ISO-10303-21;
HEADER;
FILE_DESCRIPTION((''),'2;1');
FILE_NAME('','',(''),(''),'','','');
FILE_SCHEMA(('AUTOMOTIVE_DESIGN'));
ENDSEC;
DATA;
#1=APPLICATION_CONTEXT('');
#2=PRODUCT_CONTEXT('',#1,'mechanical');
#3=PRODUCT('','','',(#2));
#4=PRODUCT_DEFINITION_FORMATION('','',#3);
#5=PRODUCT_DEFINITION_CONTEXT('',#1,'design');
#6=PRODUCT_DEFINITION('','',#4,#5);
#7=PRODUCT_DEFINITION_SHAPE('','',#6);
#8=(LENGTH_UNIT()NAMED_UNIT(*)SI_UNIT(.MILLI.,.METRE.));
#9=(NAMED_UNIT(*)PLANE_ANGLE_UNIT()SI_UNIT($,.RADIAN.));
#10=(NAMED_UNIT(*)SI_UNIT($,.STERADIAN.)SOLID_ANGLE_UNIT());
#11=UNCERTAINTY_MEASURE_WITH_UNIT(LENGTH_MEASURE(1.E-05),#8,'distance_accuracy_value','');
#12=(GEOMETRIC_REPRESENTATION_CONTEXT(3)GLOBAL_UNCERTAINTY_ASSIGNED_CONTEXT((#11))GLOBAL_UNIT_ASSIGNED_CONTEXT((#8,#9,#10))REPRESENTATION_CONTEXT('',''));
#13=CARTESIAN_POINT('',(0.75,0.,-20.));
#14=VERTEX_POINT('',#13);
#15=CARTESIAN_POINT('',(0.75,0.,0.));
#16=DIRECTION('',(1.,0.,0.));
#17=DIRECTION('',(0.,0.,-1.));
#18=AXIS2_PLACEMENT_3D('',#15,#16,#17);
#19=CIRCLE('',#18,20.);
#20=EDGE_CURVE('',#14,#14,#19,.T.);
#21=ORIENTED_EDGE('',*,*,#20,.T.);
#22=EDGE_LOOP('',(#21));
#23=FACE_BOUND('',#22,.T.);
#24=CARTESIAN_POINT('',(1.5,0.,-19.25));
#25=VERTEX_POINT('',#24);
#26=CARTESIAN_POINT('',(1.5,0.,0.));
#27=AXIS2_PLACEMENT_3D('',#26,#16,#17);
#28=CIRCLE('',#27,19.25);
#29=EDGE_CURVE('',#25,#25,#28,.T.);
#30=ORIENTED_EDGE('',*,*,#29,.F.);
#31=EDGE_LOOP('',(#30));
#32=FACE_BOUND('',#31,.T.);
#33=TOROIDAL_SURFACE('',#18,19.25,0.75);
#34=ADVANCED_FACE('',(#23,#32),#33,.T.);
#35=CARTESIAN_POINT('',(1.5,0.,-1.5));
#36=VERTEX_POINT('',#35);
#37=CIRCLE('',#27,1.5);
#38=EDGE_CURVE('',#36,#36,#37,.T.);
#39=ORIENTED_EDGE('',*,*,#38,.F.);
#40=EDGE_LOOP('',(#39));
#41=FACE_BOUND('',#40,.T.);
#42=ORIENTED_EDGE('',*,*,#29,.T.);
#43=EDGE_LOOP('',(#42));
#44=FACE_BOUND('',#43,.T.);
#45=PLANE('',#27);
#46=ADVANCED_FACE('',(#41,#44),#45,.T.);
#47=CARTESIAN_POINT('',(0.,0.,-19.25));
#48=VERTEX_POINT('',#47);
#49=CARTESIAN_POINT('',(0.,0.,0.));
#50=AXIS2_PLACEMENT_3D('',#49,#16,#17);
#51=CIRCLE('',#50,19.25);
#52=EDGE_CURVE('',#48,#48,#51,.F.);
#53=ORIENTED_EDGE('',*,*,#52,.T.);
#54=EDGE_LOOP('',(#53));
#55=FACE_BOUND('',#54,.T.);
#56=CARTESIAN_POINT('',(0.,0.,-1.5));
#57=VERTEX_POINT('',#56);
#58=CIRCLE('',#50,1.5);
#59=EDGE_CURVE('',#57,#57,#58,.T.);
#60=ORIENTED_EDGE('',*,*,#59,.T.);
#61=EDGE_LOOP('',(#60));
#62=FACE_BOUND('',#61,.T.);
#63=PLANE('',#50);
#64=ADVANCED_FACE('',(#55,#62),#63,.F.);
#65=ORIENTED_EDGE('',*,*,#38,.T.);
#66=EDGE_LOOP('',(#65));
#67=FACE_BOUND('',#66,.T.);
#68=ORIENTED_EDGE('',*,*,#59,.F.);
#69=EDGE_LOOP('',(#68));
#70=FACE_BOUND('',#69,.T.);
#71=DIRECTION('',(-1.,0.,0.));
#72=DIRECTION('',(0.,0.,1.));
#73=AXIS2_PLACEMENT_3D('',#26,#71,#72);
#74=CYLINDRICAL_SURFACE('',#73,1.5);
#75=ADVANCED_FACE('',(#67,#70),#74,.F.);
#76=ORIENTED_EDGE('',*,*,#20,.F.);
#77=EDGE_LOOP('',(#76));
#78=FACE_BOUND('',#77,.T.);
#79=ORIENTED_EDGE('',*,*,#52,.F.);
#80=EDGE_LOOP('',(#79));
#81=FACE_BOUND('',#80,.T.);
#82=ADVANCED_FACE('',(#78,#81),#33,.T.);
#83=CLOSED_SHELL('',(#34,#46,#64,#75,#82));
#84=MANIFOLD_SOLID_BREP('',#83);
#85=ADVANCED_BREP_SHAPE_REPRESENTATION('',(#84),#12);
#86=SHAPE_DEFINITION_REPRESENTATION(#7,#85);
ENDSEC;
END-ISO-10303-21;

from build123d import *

# Parameters (mm, degrees)
SKETCH1_R           = 20
SKETCH1_R_2         = 1.5
BOSS_EXTRUDE2_DEPTH = 1.5
FILLET1_R           = 0.75


with BuildPart() as part:
    # Sketch1 → Boss-Extrude2 (new body)
    with BuildSketch(Plane.YZ):
        with Locations(Location((0, 0, 0), (0, 0, 270))):
            Circle(SKETCH1_R)
        with Locations(Location((0, 0, 0), (0, 0, 270))):
            Circle(SKETCH1_R_2, mode=Mode.SUBTRACT)
    extrude(amount=BOSS_EXTRUDE2_DEPTH)

    # Fillet1
    fillet1_edges = [part.edges().sort_by_distance(p)[0] for p in [
        (0, 0, 20),
        (1.5, 0, 20),
    ]]
    fillet(fillet1_edges, radius=FILLET1_R - 0.0001)  # a hair under: the kernel refuses the full size


solid = part.part
